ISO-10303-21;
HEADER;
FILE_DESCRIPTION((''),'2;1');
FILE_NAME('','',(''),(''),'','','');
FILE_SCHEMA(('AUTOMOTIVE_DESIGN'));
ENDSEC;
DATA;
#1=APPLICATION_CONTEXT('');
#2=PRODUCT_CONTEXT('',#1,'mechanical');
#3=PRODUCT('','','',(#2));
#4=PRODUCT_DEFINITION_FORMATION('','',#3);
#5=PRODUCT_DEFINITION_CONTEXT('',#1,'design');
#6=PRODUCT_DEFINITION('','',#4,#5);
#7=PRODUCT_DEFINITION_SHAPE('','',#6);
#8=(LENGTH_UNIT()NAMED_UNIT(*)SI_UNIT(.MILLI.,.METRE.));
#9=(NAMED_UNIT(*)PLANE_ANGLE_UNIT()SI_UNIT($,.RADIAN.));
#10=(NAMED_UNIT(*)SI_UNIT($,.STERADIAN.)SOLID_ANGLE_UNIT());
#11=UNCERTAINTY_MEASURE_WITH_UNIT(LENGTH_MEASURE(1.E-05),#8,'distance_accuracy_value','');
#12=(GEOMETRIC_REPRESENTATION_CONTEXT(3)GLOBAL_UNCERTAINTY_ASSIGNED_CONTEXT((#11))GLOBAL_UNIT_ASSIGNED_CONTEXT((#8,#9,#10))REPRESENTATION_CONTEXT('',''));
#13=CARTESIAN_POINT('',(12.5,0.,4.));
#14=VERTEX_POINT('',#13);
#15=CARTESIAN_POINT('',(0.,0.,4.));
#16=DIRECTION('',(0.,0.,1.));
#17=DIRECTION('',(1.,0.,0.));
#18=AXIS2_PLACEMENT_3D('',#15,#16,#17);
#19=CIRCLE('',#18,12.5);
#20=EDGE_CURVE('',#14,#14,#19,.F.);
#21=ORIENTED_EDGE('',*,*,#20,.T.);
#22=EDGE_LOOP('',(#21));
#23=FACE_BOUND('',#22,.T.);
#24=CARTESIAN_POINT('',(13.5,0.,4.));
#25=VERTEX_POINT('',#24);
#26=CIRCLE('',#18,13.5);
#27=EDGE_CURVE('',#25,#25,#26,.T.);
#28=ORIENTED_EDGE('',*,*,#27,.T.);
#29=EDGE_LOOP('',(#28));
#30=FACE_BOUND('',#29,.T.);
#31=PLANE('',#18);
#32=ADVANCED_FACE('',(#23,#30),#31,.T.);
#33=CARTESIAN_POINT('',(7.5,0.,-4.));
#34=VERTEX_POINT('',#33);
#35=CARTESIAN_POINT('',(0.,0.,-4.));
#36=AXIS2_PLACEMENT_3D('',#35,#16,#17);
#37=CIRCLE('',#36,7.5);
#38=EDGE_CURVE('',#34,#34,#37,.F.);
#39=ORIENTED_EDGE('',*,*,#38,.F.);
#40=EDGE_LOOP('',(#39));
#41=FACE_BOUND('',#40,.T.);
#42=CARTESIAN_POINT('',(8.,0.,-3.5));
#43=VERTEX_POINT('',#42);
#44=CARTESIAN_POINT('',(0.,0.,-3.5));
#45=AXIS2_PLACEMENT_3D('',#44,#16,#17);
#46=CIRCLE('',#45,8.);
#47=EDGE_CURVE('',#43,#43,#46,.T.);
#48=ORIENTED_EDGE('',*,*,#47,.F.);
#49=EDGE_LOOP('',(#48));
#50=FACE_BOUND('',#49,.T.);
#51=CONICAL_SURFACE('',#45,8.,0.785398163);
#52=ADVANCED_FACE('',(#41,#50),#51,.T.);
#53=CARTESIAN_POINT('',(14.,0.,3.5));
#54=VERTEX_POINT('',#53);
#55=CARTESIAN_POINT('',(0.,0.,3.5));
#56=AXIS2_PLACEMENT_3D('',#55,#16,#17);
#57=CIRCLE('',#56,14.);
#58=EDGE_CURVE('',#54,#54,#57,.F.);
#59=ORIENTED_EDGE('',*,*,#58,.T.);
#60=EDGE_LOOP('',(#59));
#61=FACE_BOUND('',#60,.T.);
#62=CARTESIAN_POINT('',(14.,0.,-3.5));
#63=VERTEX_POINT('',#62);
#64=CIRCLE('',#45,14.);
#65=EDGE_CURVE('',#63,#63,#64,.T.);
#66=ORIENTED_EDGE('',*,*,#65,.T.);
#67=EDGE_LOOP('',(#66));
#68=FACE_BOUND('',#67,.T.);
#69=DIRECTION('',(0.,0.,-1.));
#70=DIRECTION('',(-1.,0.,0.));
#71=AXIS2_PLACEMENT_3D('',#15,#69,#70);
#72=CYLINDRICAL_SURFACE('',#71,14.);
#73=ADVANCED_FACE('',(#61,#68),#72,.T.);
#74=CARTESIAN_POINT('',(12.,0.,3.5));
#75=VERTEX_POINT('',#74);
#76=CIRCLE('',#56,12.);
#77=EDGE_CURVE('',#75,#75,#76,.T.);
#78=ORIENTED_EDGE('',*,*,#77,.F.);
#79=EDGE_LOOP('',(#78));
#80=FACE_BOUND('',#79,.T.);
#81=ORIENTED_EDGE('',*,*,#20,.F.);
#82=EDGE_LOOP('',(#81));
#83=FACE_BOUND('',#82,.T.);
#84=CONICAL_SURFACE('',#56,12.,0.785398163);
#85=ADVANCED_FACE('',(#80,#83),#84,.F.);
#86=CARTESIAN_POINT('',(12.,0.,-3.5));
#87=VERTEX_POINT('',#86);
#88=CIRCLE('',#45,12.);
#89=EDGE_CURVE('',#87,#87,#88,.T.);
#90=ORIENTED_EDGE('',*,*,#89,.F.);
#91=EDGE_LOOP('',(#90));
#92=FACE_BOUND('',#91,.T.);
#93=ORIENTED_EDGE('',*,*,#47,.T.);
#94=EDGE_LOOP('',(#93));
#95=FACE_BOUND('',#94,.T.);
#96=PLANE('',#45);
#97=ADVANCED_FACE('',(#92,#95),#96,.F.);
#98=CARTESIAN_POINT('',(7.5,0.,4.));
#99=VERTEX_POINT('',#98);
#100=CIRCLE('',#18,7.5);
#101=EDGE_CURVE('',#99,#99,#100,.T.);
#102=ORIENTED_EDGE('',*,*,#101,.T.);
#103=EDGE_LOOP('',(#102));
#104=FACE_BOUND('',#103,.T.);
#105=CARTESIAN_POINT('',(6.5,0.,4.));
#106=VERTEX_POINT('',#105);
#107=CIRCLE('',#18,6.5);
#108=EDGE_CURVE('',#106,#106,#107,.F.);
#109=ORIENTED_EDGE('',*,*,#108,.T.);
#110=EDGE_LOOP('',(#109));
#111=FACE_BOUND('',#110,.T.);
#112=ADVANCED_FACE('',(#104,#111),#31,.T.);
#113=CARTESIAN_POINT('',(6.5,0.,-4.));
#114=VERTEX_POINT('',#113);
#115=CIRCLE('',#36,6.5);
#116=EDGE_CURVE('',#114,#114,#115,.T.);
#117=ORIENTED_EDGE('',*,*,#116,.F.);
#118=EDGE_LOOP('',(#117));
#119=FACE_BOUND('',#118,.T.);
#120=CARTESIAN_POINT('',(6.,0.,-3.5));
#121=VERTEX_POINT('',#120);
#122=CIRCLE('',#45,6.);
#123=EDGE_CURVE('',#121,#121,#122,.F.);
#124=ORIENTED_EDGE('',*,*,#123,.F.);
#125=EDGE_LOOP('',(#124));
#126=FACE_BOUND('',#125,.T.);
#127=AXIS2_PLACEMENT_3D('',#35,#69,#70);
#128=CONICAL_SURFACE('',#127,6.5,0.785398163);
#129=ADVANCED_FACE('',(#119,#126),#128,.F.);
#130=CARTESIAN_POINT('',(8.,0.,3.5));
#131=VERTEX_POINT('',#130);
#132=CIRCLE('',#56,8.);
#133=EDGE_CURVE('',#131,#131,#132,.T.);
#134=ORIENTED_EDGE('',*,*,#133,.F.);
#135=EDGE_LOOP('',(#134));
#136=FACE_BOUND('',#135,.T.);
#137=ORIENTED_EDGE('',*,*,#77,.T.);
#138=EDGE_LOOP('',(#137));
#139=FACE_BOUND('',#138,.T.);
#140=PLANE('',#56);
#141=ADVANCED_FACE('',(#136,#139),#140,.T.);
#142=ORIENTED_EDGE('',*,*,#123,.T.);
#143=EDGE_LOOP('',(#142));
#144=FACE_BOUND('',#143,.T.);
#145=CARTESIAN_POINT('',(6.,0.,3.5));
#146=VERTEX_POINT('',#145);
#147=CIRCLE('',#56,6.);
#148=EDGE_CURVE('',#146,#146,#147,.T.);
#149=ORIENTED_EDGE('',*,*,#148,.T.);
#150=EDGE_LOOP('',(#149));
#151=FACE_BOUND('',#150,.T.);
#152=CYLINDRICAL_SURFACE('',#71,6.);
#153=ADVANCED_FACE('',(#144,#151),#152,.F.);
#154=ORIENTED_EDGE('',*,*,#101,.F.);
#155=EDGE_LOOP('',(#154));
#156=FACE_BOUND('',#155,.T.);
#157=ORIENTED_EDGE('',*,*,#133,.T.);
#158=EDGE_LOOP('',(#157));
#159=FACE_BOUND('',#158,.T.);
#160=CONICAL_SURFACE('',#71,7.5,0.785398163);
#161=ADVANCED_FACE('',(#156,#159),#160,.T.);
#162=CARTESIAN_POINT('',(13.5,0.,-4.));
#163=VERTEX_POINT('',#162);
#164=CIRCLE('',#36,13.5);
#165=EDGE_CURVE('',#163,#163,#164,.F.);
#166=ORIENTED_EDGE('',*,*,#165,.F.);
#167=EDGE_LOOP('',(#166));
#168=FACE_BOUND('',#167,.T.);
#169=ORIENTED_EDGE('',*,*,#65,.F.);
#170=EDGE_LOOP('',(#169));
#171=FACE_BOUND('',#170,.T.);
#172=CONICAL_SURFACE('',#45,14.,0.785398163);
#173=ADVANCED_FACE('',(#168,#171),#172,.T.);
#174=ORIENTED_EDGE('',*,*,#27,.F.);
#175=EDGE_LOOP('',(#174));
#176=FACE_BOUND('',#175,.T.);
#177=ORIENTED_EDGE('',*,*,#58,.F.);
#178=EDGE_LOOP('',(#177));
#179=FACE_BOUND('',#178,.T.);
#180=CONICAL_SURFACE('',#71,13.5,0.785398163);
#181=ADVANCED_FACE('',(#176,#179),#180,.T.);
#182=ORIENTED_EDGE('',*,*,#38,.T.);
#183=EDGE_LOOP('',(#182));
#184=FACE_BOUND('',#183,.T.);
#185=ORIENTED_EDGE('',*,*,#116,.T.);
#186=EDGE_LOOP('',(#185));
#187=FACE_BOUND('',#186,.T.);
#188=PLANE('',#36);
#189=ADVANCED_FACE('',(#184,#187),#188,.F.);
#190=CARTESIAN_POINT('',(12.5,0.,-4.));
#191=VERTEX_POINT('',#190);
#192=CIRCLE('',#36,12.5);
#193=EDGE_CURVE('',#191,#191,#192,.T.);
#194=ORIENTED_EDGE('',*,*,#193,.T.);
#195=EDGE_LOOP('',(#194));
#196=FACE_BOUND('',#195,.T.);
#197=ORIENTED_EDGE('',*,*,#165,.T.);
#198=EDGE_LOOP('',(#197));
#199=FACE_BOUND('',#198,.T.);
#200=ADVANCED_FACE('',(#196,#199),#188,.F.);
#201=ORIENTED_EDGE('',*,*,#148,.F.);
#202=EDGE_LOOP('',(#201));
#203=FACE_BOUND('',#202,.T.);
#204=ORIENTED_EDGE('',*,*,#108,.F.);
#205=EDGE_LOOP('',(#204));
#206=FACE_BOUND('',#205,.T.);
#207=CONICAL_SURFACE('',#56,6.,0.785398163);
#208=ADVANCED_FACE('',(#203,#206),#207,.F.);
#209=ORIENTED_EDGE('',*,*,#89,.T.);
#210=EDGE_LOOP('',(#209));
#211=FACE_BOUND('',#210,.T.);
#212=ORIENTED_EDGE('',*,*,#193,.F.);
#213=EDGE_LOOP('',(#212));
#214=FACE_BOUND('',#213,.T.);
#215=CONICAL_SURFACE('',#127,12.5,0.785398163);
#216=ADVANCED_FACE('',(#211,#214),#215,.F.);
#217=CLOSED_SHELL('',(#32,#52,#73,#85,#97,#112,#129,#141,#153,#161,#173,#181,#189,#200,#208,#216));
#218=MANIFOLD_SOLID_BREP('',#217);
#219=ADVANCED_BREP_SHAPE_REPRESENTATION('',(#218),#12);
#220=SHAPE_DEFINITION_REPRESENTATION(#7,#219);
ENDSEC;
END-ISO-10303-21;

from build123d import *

# Parameters (mm, degrees)
SKETCH1_R           = 14
SKETCH1_R_2         = 6
BOSS_EXTRUDE1_DEPTH = 4
CUT_EXTRUDE1_START  = -4
SKETCH1_3_R         = 12
SKETCH1_3_R_2       = 8
CUT_EXTRUDE1_DEPTH  = 0.5
CUT_EXTRUDE2_START  = 3.5
SKETCH1_4_R         = 12
SKETCH1_4_R_2       = 8
CUT_EXTRUDE2_DEPTH  = 0.5
CHAMFER1_SIZE       = 0.5


with BuildPart() as part:
    # Sketch1 → Boss-Extrude1 (new, symmetric)
    with BuildSketch(Plane.XY):
        Circle(SKETCH1_R)
        Circle(SKETCH1_R_2, mode=Mode.SUBTRACT)
    extrude(amount=BOSS_EXTRUDE1_DEPTH, both=True)

    # Sketch1<3> → Cut-Extrude1 (cut)
    with BuildSketch(Plane.XY.offset(CUT_EXTRUDE1_START)):
        Circle(SKETCH1_3_R)
        Circle(SKETCH1_3_R_2, mode=Mode.SUBTRACT)
    extrude(amount=CUT_EXTRUDE1_DEPTH, mode=Mode.SUBTRACT)

    # Sketch1<4> → Cut-Extrude2 (cut)
    with BuildSketch(Plane.XY.offset(CUT_EXTRUDE2_START)):
        Circle(SKETCH1_4_R)
        Circle(SKETCH1_4_R_2, mode=Mode.SUBTRACT)
    extrude(amount=CUT_EXTRUDE2_DEPTH, mode=Mode.SUBTRACT)

    # Chamfer1
    chamfer1_edges = [part.edges().sort_by_distance(p)[0] for p in [
        (-8, 0, -4),
        (-12, 0, -4),
        (-14, 0, -4),
        (-12, 0, 4),
        (-8, 0, 4),
        (-14, 0, 4),
        (-6, 0, -4),
        (-6, 0, 4),
    ]]
    chamfer(chamfer1_edges, length=CHAMFER1_SIZE - 0.0001)  # a hair under: the kernel refuses the full size


solid = part.part
